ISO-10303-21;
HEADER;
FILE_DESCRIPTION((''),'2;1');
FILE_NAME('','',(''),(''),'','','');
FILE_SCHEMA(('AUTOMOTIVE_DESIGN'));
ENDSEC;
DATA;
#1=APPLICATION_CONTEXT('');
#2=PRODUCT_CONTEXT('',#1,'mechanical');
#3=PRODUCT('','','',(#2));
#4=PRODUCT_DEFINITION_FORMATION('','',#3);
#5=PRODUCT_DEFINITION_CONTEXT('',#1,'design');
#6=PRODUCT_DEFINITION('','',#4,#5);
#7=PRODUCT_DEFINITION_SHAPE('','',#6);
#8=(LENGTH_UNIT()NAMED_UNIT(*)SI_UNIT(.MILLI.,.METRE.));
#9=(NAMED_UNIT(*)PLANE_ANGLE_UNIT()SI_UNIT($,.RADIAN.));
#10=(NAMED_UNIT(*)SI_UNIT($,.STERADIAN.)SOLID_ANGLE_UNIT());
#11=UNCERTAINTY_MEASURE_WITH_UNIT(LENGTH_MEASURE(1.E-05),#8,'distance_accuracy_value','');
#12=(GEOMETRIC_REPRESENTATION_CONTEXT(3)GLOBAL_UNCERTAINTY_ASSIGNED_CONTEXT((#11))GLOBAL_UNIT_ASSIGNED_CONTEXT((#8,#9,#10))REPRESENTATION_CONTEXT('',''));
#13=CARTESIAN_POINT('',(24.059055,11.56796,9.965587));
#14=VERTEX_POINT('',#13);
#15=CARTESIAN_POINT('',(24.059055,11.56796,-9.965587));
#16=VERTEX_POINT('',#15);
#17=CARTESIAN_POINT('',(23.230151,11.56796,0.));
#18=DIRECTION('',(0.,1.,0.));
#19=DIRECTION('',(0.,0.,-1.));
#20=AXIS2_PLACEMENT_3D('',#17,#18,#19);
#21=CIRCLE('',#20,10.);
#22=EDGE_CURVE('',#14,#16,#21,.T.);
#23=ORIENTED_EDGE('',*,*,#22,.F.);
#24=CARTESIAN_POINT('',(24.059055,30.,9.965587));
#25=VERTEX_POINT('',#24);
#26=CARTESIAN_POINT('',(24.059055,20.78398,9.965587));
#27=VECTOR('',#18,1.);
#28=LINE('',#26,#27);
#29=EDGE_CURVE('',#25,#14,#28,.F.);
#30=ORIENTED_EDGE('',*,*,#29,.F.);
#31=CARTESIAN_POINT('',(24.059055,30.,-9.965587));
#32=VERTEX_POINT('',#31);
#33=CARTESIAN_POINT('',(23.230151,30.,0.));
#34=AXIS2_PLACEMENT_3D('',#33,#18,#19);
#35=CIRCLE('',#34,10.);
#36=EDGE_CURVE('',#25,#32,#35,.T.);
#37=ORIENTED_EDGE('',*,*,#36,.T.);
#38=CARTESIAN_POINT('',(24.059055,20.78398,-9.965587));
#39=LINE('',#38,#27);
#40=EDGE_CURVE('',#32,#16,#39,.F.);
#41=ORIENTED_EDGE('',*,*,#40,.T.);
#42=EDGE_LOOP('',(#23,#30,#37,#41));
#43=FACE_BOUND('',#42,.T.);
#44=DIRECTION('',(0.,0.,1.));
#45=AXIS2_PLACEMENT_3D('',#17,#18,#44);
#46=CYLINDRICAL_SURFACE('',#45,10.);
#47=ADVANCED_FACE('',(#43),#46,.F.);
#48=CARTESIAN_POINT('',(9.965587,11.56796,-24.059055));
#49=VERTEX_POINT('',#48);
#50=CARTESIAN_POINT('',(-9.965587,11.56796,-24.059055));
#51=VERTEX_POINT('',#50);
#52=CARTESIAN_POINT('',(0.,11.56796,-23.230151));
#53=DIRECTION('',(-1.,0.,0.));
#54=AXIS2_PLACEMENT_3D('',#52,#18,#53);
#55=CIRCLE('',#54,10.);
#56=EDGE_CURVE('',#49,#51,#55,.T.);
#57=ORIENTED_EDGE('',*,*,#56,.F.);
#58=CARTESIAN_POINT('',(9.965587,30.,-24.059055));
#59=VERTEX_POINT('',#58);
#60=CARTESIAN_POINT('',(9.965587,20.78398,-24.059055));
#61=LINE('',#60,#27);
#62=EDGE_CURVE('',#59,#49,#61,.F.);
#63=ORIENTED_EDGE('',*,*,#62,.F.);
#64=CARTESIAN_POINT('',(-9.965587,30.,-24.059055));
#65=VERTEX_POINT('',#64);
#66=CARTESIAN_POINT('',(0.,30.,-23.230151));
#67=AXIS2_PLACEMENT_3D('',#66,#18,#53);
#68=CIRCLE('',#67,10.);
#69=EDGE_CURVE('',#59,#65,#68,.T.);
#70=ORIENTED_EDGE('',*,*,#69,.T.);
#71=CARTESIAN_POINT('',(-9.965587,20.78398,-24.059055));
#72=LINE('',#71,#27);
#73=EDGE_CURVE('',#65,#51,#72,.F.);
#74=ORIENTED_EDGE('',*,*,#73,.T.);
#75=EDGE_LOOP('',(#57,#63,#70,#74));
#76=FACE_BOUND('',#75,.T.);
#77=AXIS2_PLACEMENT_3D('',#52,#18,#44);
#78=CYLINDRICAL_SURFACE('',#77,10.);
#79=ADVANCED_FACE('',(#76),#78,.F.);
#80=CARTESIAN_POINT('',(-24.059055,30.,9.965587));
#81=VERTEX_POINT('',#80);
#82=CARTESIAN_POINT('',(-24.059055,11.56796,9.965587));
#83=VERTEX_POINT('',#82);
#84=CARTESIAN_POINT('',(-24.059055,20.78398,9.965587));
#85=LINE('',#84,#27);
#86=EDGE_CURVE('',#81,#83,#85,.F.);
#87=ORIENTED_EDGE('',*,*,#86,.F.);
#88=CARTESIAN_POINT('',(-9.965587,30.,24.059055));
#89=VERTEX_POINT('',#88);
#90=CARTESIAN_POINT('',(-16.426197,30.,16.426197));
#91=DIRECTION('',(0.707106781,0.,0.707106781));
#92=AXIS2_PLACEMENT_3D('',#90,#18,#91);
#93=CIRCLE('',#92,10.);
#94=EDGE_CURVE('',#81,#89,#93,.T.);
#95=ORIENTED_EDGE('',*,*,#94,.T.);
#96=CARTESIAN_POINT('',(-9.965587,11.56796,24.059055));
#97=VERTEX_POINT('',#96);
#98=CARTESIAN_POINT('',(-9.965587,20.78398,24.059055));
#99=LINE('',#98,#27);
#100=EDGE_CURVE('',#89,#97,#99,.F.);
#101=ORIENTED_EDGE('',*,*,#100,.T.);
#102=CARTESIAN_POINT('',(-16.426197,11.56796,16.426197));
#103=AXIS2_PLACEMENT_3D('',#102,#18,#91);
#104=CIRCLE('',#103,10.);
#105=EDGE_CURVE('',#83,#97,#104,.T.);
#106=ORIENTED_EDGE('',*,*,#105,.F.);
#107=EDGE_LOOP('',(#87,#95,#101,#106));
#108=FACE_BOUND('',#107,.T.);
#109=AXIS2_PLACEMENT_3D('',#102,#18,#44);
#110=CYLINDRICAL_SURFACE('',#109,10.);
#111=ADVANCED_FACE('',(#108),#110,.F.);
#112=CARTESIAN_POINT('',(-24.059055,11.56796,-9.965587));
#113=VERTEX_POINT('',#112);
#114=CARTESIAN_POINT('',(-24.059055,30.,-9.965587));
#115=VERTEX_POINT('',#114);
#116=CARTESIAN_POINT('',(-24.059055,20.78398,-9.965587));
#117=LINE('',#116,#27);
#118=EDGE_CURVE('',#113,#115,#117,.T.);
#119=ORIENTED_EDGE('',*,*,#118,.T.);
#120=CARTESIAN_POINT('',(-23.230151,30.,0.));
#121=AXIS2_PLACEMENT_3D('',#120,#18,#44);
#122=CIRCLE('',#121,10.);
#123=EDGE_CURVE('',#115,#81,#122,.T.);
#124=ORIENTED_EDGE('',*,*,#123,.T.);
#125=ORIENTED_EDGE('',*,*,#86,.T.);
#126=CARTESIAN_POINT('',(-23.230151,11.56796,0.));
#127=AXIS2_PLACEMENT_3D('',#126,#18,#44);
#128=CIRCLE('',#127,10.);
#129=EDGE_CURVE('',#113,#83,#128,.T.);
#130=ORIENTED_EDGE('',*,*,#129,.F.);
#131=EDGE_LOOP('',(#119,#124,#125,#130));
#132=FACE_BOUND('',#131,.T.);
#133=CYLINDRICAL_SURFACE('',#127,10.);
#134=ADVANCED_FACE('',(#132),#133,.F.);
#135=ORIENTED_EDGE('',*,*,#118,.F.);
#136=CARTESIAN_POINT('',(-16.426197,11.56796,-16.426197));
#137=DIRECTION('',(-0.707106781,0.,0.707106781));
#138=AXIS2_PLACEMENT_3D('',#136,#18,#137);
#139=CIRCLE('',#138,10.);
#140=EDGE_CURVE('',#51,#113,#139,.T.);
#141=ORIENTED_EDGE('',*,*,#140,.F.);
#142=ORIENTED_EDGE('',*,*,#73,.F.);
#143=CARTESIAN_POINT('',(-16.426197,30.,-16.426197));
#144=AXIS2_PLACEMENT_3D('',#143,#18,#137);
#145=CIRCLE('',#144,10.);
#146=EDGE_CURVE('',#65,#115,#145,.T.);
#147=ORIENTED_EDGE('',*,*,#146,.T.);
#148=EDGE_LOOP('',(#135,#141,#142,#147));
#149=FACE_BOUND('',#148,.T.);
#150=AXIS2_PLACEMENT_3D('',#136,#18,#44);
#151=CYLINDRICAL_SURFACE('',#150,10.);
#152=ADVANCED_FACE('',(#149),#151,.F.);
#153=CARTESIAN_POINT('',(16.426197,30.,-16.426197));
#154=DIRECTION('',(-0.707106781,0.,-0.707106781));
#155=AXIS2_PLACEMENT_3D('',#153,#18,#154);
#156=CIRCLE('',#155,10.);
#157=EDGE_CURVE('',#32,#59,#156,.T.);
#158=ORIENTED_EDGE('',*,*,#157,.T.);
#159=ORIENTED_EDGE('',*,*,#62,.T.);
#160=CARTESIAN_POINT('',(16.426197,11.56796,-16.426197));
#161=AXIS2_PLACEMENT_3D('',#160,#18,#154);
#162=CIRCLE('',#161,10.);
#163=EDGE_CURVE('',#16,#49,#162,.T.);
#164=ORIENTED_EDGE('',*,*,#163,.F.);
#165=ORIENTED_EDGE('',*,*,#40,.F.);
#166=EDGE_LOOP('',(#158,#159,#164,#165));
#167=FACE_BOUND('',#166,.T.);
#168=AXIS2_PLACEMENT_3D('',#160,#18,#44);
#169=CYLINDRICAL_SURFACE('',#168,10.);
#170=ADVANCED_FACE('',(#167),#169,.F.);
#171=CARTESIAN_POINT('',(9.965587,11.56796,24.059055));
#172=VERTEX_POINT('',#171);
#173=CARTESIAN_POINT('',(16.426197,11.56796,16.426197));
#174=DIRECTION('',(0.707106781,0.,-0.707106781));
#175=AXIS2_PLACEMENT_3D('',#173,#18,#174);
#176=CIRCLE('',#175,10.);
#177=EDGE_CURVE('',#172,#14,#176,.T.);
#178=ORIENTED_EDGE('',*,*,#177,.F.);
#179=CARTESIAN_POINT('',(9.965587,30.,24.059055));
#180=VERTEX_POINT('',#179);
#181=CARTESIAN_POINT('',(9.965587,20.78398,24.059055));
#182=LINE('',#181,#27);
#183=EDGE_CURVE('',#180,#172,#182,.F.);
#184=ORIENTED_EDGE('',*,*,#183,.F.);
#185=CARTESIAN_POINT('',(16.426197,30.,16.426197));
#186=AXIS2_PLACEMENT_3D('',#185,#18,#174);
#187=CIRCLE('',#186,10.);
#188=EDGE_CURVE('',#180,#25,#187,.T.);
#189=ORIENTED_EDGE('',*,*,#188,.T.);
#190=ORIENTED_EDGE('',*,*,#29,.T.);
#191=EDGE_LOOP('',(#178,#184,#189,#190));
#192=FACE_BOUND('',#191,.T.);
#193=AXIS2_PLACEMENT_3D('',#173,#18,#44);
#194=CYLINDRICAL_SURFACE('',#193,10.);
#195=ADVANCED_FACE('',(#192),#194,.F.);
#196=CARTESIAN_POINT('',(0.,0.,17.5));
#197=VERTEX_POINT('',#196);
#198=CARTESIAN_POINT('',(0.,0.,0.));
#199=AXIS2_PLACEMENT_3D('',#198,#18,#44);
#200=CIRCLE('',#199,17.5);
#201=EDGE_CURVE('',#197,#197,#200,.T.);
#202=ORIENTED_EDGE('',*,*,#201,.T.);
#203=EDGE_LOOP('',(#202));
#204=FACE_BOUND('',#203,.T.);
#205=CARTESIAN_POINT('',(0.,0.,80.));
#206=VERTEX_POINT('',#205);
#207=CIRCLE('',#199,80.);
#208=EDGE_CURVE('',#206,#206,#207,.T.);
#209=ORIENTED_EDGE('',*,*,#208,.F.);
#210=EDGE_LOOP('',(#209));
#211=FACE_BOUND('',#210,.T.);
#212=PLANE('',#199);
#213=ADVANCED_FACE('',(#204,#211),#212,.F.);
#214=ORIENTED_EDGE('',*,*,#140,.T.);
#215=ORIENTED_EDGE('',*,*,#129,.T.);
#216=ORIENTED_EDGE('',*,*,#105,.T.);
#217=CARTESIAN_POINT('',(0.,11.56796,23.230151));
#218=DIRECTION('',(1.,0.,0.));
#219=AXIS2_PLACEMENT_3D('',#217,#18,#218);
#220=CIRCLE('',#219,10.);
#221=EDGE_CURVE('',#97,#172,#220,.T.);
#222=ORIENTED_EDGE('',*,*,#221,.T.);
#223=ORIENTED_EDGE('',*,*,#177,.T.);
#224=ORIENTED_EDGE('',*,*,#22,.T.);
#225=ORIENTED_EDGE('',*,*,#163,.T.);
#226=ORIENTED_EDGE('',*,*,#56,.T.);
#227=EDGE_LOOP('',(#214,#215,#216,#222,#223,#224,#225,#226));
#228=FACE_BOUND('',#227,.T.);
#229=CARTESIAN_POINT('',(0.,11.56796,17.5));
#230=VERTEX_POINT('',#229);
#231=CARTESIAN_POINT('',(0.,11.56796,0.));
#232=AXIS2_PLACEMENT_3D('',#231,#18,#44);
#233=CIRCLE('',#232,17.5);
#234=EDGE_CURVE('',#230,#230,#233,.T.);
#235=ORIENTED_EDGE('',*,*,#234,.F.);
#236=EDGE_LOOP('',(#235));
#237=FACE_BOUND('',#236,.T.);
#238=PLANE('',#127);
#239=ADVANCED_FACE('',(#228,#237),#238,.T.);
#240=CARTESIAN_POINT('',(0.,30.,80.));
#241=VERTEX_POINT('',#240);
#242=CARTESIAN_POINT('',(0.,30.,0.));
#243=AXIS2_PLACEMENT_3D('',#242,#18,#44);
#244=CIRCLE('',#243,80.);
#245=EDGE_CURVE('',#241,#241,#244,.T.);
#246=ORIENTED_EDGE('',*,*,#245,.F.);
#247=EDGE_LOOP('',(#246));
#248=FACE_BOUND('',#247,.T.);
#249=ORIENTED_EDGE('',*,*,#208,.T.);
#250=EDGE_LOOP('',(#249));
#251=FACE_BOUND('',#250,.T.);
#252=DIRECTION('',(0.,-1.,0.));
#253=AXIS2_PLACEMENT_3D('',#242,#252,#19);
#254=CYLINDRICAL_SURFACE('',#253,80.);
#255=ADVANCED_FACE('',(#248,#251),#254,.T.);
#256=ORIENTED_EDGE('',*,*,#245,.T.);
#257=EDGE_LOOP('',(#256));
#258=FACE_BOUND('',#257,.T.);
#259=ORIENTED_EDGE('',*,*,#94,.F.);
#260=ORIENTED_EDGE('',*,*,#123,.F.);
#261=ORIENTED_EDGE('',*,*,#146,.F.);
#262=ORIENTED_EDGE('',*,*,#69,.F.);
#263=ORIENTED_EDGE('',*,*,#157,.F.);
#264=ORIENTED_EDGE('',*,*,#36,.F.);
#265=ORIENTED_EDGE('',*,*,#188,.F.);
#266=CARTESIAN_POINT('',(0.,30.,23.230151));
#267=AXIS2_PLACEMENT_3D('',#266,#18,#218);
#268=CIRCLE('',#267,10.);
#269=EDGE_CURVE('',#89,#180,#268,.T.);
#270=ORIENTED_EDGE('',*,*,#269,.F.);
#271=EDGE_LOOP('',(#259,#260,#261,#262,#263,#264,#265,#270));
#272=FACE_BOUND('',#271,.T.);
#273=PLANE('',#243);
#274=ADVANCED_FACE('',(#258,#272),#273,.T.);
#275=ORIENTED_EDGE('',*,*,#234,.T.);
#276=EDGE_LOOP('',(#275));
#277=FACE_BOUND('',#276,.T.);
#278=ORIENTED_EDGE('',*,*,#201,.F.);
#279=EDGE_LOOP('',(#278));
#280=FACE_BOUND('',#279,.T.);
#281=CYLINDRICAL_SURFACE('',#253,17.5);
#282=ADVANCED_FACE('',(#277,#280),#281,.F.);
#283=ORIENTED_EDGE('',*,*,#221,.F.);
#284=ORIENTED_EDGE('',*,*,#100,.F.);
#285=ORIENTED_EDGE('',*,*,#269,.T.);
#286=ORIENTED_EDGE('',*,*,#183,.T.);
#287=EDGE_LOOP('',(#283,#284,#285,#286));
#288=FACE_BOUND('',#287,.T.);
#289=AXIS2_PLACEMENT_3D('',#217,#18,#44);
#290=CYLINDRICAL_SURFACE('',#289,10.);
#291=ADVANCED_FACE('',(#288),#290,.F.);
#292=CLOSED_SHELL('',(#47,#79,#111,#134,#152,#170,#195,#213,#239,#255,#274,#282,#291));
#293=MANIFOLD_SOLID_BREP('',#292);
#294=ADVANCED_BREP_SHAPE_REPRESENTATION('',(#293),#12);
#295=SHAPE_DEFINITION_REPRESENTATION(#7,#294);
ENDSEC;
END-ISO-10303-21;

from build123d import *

# Parameters (mm, degrees)
SKETCH1_R           = 80
BOSS_EXTRUDE1_DEPTH = 30
SKETCH2_R           = 17.5
CUT_EXTRUDE1_DEPTH  = 118.046999107
SKETCH3_R           = 10
CUT_EXTRUDE2_DEPTH  = 18.432040154
CIRPATTERN1_COUNT   = 8


with BuildPart() as part:
    # Sketch1 → Boss-Extrude1 (new body)
    with BuildSketch(Plane(origin=(0, 0, 0), x_dir=(1, 0, 0), z_dir=(0, 1, 0))):
        Circle(SKETCH1_R)
    extrude(amount=BOSS_EXTRUDE1_DEPTH)

    # Sketch2 → Cut-Extrude1 (cut, through all)
    with BuildSketch(Plane(origin=(0, 0, 0), x_dir=(1, 0, 0), z_dir=(0, 1, 0))):
        Circle(SKETCH2_R)
    extrude(amount=CUT_EXTRUDE1_DEPTH, mode=Mode.SUBTRACT)

    # Sketch3 → Cut-Extrude2 (cut)
    with BuildSketch(Plane(origin=(0, 30, 0), x_dir=(1, 0, 0), z_dir=(0, 1, 0))):
        with Locations((-23.230150503, 0)):
            Circle(SKETCH3_R)
    cut_extrude2 = extrude(amount=-CUT_EXTRUDE2_DEPTH, mode=Mode.SUBTRACT)

    # CirPattern1: Cut-Extrude2 ×8 about axis
    cirpattern1_axis = Axis((0, 0, 0), (0, 1, 0))
    for i in range(1, CIRPATTERN1_COUNT):
        add(cut_extrude2.rotate(cirpattern1_axis, i * 360 / CIRPATTERN1_COUNT), mode=Mode.SUBTRACT)


solid = part.part
